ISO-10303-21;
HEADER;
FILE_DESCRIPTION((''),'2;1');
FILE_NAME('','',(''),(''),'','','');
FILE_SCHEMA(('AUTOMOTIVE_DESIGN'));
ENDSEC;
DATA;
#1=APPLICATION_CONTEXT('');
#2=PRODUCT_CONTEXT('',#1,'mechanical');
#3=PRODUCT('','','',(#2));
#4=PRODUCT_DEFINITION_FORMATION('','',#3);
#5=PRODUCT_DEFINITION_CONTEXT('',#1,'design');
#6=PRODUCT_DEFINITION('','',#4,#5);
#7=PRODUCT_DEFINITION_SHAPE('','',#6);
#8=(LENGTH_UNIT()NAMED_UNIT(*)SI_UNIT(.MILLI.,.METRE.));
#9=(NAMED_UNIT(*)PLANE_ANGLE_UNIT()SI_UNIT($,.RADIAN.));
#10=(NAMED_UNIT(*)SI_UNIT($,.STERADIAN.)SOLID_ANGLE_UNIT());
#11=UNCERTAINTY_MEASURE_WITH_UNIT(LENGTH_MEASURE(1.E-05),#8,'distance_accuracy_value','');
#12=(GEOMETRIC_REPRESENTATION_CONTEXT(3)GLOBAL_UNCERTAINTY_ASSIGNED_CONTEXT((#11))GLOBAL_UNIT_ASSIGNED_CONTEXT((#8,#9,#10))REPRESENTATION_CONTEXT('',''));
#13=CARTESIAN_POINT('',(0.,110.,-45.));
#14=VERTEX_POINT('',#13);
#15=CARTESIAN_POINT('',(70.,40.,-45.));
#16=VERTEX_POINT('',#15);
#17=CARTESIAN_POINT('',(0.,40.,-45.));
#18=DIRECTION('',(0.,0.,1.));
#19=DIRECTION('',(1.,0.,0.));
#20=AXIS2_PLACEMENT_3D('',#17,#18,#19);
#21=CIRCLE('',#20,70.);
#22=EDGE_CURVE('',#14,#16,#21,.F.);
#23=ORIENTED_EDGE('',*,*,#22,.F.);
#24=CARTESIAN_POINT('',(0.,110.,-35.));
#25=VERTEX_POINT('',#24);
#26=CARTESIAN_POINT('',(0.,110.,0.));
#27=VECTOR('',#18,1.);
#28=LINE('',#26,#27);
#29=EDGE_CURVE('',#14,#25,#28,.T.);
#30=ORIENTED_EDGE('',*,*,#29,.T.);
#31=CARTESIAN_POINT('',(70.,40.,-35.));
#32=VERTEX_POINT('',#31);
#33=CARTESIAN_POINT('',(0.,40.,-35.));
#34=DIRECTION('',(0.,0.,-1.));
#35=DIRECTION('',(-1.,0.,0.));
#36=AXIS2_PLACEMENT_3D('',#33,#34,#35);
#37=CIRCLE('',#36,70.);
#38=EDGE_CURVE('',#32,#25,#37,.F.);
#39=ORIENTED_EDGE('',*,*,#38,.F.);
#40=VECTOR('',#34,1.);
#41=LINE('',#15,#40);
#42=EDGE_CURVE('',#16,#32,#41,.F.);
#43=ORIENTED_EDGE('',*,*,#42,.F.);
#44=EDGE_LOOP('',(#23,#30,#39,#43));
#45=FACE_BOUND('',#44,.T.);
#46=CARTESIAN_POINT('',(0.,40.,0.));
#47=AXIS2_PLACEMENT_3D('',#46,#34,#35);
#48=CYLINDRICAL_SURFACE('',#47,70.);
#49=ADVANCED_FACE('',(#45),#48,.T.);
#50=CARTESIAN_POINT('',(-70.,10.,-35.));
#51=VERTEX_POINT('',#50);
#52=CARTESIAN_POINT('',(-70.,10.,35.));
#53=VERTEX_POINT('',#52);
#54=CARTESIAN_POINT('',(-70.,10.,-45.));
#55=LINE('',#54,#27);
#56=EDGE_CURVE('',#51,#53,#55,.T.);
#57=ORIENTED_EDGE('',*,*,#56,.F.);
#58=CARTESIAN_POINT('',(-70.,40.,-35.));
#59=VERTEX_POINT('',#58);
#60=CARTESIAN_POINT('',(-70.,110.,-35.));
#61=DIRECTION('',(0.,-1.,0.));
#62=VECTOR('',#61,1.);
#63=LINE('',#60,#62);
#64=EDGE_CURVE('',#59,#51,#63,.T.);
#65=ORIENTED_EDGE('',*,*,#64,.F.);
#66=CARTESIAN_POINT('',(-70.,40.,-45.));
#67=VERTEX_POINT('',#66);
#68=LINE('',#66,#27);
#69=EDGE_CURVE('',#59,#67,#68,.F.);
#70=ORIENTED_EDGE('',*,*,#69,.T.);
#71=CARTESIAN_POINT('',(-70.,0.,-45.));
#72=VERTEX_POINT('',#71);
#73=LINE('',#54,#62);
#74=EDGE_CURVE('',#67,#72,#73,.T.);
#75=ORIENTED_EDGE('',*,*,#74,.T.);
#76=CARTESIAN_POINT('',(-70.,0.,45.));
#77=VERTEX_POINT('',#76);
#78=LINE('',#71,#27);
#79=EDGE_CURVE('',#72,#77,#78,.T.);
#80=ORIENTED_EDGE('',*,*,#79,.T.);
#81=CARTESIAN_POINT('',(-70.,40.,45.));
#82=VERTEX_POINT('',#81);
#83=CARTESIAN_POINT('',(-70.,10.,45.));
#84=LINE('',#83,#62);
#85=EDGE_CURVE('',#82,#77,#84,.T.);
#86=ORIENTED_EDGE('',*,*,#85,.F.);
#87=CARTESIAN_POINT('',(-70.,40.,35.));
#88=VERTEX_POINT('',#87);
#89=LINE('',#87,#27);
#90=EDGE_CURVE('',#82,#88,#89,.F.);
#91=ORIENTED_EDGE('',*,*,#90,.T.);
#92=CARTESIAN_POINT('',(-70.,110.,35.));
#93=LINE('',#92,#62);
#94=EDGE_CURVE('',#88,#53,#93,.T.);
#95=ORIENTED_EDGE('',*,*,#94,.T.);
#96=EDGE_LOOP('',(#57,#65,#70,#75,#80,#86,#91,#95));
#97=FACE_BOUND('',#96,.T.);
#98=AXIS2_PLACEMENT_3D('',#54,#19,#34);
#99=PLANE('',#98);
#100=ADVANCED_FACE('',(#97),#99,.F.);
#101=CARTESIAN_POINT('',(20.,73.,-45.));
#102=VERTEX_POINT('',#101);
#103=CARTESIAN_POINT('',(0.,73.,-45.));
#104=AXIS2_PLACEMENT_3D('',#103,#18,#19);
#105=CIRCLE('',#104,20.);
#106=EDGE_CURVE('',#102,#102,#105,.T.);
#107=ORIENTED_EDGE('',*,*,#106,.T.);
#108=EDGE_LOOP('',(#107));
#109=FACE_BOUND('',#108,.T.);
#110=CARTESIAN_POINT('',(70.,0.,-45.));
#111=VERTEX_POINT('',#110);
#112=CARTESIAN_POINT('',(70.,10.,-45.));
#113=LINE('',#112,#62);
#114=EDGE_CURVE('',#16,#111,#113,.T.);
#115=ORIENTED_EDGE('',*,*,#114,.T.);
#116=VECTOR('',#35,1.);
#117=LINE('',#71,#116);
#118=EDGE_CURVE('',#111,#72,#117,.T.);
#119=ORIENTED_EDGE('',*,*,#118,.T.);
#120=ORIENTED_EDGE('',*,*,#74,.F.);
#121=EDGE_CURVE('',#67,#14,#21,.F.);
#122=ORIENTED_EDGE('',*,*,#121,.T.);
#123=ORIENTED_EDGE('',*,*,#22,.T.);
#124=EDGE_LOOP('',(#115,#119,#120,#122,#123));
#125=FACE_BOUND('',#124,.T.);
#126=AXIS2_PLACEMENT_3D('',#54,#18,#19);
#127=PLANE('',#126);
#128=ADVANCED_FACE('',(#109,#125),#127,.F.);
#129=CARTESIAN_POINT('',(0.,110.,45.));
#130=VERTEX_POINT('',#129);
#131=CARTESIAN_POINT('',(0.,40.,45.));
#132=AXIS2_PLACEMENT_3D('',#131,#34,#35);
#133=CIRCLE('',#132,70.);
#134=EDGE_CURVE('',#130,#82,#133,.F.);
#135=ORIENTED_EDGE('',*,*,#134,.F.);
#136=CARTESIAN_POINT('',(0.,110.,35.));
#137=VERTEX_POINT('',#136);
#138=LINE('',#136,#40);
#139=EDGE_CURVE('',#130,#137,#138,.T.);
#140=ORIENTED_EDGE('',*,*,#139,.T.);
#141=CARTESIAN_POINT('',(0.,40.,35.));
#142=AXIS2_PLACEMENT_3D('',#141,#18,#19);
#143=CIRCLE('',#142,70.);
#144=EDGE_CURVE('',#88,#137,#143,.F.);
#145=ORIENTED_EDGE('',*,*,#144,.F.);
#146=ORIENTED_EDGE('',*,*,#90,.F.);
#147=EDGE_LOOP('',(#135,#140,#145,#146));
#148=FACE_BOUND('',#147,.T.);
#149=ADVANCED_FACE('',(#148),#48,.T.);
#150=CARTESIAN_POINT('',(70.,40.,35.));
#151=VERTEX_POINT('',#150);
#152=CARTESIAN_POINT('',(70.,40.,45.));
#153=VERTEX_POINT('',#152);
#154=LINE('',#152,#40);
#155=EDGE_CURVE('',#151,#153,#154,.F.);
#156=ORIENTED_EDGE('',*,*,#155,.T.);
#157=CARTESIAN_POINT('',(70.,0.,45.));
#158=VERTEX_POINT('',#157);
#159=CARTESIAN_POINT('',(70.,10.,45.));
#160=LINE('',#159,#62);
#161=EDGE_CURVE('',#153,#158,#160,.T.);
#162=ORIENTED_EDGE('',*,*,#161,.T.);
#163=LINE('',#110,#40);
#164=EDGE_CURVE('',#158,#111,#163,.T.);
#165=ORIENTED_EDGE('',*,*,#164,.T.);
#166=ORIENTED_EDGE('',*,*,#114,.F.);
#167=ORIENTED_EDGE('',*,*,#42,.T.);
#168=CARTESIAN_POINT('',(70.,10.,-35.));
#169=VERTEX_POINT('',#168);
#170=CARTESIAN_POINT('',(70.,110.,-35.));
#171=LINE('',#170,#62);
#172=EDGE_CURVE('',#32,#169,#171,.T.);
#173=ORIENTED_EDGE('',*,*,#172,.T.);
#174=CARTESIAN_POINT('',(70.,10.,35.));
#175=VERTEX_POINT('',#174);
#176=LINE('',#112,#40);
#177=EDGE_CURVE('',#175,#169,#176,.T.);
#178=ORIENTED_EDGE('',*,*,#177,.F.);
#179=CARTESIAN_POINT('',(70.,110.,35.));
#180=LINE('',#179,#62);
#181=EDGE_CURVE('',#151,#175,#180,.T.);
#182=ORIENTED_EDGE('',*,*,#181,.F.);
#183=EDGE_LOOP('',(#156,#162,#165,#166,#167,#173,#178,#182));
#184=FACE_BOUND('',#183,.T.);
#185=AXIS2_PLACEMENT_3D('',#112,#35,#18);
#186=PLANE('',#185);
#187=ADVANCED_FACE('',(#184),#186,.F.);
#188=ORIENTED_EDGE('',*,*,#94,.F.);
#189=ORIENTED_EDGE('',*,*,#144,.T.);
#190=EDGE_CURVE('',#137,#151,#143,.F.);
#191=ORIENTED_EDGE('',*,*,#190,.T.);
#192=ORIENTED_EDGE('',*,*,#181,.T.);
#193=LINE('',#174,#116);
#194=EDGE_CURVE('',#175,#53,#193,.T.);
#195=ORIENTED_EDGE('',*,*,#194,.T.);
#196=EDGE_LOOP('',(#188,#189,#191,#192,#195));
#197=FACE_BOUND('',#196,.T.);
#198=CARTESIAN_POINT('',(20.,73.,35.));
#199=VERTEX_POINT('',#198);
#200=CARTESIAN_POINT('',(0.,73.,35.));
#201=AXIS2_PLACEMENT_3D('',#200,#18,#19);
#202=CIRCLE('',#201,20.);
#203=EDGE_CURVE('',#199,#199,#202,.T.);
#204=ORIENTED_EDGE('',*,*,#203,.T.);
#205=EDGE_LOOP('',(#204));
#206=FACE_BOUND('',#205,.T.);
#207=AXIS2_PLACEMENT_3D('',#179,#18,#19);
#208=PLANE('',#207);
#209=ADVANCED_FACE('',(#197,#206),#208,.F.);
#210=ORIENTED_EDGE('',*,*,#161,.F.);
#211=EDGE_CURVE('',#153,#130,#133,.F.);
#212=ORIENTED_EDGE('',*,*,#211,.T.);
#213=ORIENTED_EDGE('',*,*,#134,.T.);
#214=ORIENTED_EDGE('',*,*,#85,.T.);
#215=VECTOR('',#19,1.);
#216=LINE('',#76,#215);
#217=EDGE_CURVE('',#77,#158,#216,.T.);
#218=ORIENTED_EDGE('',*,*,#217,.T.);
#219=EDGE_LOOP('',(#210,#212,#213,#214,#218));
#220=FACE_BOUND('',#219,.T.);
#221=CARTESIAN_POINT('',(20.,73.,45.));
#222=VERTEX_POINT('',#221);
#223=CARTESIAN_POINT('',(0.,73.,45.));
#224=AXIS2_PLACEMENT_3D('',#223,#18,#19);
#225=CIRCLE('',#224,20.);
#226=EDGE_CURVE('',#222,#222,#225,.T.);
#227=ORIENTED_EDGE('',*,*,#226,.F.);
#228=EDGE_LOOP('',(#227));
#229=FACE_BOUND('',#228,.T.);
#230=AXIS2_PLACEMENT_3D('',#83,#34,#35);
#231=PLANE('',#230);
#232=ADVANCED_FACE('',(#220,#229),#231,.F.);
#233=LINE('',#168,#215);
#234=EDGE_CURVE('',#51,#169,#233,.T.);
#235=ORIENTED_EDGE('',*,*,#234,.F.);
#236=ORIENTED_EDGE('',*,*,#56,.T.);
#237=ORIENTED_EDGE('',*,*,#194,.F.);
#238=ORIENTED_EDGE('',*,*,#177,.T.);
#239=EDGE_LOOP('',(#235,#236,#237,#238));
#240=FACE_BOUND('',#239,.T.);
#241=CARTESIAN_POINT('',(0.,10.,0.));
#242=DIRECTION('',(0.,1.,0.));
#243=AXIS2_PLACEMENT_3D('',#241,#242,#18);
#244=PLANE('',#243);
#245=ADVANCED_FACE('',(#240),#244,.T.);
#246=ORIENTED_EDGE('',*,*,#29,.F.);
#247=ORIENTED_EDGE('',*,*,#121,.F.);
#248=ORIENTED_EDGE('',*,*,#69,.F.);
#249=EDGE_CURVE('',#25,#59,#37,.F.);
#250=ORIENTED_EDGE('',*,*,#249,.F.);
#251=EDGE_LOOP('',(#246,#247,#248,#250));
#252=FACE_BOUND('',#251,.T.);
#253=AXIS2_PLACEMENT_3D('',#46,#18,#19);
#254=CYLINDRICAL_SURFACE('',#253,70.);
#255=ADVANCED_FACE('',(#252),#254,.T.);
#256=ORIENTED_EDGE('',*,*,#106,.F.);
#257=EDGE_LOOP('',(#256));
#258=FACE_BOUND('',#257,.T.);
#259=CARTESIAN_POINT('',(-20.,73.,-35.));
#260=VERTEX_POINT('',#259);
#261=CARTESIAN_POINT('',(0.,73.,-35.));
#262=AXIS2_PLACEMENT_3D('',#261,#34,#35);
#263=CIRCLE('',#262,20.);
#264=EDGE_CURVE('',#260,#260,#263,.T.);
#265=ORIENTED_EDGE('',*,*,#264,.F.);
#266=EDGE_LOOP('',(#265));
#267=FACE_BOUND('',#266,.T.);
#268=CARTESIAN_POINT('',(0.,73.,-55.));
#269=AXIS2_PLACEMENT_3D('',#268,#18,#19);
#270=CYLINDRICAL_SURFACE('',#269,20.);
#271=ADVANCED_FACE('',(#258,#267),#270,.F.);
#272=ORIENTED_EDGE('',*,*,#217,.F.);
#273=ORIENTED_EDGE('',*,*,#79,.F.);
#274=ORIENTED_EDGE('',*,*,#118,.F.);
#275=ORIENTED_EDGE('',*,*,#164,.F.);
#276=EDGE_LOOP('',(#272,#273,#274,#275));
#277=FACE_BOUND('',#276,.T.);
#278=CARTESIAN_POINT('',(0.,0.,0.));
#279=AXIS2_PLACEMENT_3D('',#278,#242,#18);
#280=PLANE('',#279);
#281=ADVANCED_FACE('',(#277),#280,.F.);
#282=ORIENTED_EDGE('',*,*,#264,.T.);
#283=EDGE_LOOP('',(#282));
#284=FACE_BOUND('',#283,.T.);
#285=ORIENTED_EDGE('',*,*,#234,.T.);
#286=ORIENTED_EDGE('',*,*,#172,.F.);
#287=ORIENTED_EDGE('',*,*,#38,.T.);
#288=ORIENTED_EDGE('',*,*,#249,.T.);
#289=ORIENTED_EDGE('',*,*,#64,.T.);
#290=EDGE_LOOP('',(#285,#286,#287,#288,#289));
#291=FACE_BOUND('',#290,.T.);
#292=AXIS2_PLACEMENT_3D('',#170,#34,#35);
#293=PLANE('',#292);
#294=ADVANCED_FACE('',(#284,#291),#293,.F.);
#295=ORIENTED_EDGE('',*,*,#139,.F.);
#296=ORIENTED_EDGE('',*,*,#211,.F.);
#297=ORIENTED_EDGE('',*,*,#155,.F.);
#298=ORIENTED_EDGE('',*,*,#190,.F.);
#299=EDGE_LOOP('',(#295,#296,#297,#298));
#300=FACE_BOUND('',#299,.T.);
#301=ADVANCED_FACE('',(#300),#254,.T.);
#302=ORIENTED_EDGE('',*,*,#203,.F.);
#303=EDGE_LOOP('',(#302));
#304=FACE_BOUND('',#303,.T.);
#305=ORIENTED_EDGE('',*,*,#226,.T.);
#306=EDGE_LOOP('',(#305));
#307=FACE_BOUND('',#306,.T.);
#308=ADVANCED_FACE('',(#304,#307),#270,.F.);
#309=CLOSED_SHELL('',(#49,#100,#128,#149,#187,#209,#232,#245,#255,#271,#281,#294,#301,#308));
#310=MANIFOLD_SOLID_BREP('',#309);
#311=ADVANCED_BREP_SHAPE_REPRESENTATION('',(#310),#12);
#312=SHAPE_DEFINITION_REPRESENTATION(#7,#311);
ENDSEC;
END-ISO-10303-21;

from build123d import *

# Parameters (mm, degrees)
CROQUIS1_W              = 140
CROQUIS1_H              = 90
SALIENTE_EXTRUIR1_DEPTH = 10
CROQUIS2_W              = 140
CROQUIS2_H              = 10
SALIENTE_EXTRUIR2_DEPTH = 100
REDONDEO1_R             = 70
CORTAR_EXTRUIR1_DEPTH   = 100


with BuildPart() as part:
    # Croquis1 → Saliente-Extruir1 (new body)
    with BuildSketch(Plane(origin=(0, 0, 0), x_dir=(1, 0, 0), z_dir=(0, 1, 0))):
        Rectangle(CROQUIS1_W, CROQUIS1_H)
    extrude(amount=SALIENTE_EXTRUIR1_DEPTH)

    # Croquis2 → Saliente-Extruir2 (add)
    with BuildSketch(Plane(origin=(0, 10, 0), x_dir=(1, 0, 0), z_dir=(0, 1, 0))):
        with Locations((0, -40)):
            Rectangle(CROQUIS2_W, CROQUIS2_H)
        with Locations((0, 40)):
            Rectangle(CROQUIS2_W, CROQUIS2_H)
    extrude(amount=SALIENTE_EXTRUIR2_DEPTH)

    # Redondeo1
    redondeo1_edges = [part.edges().sort_by_distance(p)[0] for p in [
        (-70, 110, 40),
        (70, 110, 40),
        (70, 110, -40),
        (-70, 110, -40),
    ]]
    fillet(redondeo1_edges, radius=REDONDEO1_R - 0.0001)  # a hair under: the kernel refuses the full size

    # Croquis3 → Cortar-Extruir1 (cut)
    with BuildSketch(Plane.XY.offset(45)):
        with BuildLine():
            ThreePointArc((0, 93), (-20, 73), (0, 53))
            Line((0, 53), (0, 73))
            Line((0, 73), (0, 93))
        make_face()
        with BuildLine():
            Line((0, 73), (0, 53))
            ThreePointArc((0, 53), (14.142135624, 58.857864376), (20, 73))
            ThreePointArc((20, 73), (14.142135624, 87.142135624), (0, 93))
            Line((0, 93), (0, 73))
        make_face()
    extrude(amount=-CORTAR_EXTRUIR1_DEPTH, mode=Mode.SUBTRACT)


solid = part.part
